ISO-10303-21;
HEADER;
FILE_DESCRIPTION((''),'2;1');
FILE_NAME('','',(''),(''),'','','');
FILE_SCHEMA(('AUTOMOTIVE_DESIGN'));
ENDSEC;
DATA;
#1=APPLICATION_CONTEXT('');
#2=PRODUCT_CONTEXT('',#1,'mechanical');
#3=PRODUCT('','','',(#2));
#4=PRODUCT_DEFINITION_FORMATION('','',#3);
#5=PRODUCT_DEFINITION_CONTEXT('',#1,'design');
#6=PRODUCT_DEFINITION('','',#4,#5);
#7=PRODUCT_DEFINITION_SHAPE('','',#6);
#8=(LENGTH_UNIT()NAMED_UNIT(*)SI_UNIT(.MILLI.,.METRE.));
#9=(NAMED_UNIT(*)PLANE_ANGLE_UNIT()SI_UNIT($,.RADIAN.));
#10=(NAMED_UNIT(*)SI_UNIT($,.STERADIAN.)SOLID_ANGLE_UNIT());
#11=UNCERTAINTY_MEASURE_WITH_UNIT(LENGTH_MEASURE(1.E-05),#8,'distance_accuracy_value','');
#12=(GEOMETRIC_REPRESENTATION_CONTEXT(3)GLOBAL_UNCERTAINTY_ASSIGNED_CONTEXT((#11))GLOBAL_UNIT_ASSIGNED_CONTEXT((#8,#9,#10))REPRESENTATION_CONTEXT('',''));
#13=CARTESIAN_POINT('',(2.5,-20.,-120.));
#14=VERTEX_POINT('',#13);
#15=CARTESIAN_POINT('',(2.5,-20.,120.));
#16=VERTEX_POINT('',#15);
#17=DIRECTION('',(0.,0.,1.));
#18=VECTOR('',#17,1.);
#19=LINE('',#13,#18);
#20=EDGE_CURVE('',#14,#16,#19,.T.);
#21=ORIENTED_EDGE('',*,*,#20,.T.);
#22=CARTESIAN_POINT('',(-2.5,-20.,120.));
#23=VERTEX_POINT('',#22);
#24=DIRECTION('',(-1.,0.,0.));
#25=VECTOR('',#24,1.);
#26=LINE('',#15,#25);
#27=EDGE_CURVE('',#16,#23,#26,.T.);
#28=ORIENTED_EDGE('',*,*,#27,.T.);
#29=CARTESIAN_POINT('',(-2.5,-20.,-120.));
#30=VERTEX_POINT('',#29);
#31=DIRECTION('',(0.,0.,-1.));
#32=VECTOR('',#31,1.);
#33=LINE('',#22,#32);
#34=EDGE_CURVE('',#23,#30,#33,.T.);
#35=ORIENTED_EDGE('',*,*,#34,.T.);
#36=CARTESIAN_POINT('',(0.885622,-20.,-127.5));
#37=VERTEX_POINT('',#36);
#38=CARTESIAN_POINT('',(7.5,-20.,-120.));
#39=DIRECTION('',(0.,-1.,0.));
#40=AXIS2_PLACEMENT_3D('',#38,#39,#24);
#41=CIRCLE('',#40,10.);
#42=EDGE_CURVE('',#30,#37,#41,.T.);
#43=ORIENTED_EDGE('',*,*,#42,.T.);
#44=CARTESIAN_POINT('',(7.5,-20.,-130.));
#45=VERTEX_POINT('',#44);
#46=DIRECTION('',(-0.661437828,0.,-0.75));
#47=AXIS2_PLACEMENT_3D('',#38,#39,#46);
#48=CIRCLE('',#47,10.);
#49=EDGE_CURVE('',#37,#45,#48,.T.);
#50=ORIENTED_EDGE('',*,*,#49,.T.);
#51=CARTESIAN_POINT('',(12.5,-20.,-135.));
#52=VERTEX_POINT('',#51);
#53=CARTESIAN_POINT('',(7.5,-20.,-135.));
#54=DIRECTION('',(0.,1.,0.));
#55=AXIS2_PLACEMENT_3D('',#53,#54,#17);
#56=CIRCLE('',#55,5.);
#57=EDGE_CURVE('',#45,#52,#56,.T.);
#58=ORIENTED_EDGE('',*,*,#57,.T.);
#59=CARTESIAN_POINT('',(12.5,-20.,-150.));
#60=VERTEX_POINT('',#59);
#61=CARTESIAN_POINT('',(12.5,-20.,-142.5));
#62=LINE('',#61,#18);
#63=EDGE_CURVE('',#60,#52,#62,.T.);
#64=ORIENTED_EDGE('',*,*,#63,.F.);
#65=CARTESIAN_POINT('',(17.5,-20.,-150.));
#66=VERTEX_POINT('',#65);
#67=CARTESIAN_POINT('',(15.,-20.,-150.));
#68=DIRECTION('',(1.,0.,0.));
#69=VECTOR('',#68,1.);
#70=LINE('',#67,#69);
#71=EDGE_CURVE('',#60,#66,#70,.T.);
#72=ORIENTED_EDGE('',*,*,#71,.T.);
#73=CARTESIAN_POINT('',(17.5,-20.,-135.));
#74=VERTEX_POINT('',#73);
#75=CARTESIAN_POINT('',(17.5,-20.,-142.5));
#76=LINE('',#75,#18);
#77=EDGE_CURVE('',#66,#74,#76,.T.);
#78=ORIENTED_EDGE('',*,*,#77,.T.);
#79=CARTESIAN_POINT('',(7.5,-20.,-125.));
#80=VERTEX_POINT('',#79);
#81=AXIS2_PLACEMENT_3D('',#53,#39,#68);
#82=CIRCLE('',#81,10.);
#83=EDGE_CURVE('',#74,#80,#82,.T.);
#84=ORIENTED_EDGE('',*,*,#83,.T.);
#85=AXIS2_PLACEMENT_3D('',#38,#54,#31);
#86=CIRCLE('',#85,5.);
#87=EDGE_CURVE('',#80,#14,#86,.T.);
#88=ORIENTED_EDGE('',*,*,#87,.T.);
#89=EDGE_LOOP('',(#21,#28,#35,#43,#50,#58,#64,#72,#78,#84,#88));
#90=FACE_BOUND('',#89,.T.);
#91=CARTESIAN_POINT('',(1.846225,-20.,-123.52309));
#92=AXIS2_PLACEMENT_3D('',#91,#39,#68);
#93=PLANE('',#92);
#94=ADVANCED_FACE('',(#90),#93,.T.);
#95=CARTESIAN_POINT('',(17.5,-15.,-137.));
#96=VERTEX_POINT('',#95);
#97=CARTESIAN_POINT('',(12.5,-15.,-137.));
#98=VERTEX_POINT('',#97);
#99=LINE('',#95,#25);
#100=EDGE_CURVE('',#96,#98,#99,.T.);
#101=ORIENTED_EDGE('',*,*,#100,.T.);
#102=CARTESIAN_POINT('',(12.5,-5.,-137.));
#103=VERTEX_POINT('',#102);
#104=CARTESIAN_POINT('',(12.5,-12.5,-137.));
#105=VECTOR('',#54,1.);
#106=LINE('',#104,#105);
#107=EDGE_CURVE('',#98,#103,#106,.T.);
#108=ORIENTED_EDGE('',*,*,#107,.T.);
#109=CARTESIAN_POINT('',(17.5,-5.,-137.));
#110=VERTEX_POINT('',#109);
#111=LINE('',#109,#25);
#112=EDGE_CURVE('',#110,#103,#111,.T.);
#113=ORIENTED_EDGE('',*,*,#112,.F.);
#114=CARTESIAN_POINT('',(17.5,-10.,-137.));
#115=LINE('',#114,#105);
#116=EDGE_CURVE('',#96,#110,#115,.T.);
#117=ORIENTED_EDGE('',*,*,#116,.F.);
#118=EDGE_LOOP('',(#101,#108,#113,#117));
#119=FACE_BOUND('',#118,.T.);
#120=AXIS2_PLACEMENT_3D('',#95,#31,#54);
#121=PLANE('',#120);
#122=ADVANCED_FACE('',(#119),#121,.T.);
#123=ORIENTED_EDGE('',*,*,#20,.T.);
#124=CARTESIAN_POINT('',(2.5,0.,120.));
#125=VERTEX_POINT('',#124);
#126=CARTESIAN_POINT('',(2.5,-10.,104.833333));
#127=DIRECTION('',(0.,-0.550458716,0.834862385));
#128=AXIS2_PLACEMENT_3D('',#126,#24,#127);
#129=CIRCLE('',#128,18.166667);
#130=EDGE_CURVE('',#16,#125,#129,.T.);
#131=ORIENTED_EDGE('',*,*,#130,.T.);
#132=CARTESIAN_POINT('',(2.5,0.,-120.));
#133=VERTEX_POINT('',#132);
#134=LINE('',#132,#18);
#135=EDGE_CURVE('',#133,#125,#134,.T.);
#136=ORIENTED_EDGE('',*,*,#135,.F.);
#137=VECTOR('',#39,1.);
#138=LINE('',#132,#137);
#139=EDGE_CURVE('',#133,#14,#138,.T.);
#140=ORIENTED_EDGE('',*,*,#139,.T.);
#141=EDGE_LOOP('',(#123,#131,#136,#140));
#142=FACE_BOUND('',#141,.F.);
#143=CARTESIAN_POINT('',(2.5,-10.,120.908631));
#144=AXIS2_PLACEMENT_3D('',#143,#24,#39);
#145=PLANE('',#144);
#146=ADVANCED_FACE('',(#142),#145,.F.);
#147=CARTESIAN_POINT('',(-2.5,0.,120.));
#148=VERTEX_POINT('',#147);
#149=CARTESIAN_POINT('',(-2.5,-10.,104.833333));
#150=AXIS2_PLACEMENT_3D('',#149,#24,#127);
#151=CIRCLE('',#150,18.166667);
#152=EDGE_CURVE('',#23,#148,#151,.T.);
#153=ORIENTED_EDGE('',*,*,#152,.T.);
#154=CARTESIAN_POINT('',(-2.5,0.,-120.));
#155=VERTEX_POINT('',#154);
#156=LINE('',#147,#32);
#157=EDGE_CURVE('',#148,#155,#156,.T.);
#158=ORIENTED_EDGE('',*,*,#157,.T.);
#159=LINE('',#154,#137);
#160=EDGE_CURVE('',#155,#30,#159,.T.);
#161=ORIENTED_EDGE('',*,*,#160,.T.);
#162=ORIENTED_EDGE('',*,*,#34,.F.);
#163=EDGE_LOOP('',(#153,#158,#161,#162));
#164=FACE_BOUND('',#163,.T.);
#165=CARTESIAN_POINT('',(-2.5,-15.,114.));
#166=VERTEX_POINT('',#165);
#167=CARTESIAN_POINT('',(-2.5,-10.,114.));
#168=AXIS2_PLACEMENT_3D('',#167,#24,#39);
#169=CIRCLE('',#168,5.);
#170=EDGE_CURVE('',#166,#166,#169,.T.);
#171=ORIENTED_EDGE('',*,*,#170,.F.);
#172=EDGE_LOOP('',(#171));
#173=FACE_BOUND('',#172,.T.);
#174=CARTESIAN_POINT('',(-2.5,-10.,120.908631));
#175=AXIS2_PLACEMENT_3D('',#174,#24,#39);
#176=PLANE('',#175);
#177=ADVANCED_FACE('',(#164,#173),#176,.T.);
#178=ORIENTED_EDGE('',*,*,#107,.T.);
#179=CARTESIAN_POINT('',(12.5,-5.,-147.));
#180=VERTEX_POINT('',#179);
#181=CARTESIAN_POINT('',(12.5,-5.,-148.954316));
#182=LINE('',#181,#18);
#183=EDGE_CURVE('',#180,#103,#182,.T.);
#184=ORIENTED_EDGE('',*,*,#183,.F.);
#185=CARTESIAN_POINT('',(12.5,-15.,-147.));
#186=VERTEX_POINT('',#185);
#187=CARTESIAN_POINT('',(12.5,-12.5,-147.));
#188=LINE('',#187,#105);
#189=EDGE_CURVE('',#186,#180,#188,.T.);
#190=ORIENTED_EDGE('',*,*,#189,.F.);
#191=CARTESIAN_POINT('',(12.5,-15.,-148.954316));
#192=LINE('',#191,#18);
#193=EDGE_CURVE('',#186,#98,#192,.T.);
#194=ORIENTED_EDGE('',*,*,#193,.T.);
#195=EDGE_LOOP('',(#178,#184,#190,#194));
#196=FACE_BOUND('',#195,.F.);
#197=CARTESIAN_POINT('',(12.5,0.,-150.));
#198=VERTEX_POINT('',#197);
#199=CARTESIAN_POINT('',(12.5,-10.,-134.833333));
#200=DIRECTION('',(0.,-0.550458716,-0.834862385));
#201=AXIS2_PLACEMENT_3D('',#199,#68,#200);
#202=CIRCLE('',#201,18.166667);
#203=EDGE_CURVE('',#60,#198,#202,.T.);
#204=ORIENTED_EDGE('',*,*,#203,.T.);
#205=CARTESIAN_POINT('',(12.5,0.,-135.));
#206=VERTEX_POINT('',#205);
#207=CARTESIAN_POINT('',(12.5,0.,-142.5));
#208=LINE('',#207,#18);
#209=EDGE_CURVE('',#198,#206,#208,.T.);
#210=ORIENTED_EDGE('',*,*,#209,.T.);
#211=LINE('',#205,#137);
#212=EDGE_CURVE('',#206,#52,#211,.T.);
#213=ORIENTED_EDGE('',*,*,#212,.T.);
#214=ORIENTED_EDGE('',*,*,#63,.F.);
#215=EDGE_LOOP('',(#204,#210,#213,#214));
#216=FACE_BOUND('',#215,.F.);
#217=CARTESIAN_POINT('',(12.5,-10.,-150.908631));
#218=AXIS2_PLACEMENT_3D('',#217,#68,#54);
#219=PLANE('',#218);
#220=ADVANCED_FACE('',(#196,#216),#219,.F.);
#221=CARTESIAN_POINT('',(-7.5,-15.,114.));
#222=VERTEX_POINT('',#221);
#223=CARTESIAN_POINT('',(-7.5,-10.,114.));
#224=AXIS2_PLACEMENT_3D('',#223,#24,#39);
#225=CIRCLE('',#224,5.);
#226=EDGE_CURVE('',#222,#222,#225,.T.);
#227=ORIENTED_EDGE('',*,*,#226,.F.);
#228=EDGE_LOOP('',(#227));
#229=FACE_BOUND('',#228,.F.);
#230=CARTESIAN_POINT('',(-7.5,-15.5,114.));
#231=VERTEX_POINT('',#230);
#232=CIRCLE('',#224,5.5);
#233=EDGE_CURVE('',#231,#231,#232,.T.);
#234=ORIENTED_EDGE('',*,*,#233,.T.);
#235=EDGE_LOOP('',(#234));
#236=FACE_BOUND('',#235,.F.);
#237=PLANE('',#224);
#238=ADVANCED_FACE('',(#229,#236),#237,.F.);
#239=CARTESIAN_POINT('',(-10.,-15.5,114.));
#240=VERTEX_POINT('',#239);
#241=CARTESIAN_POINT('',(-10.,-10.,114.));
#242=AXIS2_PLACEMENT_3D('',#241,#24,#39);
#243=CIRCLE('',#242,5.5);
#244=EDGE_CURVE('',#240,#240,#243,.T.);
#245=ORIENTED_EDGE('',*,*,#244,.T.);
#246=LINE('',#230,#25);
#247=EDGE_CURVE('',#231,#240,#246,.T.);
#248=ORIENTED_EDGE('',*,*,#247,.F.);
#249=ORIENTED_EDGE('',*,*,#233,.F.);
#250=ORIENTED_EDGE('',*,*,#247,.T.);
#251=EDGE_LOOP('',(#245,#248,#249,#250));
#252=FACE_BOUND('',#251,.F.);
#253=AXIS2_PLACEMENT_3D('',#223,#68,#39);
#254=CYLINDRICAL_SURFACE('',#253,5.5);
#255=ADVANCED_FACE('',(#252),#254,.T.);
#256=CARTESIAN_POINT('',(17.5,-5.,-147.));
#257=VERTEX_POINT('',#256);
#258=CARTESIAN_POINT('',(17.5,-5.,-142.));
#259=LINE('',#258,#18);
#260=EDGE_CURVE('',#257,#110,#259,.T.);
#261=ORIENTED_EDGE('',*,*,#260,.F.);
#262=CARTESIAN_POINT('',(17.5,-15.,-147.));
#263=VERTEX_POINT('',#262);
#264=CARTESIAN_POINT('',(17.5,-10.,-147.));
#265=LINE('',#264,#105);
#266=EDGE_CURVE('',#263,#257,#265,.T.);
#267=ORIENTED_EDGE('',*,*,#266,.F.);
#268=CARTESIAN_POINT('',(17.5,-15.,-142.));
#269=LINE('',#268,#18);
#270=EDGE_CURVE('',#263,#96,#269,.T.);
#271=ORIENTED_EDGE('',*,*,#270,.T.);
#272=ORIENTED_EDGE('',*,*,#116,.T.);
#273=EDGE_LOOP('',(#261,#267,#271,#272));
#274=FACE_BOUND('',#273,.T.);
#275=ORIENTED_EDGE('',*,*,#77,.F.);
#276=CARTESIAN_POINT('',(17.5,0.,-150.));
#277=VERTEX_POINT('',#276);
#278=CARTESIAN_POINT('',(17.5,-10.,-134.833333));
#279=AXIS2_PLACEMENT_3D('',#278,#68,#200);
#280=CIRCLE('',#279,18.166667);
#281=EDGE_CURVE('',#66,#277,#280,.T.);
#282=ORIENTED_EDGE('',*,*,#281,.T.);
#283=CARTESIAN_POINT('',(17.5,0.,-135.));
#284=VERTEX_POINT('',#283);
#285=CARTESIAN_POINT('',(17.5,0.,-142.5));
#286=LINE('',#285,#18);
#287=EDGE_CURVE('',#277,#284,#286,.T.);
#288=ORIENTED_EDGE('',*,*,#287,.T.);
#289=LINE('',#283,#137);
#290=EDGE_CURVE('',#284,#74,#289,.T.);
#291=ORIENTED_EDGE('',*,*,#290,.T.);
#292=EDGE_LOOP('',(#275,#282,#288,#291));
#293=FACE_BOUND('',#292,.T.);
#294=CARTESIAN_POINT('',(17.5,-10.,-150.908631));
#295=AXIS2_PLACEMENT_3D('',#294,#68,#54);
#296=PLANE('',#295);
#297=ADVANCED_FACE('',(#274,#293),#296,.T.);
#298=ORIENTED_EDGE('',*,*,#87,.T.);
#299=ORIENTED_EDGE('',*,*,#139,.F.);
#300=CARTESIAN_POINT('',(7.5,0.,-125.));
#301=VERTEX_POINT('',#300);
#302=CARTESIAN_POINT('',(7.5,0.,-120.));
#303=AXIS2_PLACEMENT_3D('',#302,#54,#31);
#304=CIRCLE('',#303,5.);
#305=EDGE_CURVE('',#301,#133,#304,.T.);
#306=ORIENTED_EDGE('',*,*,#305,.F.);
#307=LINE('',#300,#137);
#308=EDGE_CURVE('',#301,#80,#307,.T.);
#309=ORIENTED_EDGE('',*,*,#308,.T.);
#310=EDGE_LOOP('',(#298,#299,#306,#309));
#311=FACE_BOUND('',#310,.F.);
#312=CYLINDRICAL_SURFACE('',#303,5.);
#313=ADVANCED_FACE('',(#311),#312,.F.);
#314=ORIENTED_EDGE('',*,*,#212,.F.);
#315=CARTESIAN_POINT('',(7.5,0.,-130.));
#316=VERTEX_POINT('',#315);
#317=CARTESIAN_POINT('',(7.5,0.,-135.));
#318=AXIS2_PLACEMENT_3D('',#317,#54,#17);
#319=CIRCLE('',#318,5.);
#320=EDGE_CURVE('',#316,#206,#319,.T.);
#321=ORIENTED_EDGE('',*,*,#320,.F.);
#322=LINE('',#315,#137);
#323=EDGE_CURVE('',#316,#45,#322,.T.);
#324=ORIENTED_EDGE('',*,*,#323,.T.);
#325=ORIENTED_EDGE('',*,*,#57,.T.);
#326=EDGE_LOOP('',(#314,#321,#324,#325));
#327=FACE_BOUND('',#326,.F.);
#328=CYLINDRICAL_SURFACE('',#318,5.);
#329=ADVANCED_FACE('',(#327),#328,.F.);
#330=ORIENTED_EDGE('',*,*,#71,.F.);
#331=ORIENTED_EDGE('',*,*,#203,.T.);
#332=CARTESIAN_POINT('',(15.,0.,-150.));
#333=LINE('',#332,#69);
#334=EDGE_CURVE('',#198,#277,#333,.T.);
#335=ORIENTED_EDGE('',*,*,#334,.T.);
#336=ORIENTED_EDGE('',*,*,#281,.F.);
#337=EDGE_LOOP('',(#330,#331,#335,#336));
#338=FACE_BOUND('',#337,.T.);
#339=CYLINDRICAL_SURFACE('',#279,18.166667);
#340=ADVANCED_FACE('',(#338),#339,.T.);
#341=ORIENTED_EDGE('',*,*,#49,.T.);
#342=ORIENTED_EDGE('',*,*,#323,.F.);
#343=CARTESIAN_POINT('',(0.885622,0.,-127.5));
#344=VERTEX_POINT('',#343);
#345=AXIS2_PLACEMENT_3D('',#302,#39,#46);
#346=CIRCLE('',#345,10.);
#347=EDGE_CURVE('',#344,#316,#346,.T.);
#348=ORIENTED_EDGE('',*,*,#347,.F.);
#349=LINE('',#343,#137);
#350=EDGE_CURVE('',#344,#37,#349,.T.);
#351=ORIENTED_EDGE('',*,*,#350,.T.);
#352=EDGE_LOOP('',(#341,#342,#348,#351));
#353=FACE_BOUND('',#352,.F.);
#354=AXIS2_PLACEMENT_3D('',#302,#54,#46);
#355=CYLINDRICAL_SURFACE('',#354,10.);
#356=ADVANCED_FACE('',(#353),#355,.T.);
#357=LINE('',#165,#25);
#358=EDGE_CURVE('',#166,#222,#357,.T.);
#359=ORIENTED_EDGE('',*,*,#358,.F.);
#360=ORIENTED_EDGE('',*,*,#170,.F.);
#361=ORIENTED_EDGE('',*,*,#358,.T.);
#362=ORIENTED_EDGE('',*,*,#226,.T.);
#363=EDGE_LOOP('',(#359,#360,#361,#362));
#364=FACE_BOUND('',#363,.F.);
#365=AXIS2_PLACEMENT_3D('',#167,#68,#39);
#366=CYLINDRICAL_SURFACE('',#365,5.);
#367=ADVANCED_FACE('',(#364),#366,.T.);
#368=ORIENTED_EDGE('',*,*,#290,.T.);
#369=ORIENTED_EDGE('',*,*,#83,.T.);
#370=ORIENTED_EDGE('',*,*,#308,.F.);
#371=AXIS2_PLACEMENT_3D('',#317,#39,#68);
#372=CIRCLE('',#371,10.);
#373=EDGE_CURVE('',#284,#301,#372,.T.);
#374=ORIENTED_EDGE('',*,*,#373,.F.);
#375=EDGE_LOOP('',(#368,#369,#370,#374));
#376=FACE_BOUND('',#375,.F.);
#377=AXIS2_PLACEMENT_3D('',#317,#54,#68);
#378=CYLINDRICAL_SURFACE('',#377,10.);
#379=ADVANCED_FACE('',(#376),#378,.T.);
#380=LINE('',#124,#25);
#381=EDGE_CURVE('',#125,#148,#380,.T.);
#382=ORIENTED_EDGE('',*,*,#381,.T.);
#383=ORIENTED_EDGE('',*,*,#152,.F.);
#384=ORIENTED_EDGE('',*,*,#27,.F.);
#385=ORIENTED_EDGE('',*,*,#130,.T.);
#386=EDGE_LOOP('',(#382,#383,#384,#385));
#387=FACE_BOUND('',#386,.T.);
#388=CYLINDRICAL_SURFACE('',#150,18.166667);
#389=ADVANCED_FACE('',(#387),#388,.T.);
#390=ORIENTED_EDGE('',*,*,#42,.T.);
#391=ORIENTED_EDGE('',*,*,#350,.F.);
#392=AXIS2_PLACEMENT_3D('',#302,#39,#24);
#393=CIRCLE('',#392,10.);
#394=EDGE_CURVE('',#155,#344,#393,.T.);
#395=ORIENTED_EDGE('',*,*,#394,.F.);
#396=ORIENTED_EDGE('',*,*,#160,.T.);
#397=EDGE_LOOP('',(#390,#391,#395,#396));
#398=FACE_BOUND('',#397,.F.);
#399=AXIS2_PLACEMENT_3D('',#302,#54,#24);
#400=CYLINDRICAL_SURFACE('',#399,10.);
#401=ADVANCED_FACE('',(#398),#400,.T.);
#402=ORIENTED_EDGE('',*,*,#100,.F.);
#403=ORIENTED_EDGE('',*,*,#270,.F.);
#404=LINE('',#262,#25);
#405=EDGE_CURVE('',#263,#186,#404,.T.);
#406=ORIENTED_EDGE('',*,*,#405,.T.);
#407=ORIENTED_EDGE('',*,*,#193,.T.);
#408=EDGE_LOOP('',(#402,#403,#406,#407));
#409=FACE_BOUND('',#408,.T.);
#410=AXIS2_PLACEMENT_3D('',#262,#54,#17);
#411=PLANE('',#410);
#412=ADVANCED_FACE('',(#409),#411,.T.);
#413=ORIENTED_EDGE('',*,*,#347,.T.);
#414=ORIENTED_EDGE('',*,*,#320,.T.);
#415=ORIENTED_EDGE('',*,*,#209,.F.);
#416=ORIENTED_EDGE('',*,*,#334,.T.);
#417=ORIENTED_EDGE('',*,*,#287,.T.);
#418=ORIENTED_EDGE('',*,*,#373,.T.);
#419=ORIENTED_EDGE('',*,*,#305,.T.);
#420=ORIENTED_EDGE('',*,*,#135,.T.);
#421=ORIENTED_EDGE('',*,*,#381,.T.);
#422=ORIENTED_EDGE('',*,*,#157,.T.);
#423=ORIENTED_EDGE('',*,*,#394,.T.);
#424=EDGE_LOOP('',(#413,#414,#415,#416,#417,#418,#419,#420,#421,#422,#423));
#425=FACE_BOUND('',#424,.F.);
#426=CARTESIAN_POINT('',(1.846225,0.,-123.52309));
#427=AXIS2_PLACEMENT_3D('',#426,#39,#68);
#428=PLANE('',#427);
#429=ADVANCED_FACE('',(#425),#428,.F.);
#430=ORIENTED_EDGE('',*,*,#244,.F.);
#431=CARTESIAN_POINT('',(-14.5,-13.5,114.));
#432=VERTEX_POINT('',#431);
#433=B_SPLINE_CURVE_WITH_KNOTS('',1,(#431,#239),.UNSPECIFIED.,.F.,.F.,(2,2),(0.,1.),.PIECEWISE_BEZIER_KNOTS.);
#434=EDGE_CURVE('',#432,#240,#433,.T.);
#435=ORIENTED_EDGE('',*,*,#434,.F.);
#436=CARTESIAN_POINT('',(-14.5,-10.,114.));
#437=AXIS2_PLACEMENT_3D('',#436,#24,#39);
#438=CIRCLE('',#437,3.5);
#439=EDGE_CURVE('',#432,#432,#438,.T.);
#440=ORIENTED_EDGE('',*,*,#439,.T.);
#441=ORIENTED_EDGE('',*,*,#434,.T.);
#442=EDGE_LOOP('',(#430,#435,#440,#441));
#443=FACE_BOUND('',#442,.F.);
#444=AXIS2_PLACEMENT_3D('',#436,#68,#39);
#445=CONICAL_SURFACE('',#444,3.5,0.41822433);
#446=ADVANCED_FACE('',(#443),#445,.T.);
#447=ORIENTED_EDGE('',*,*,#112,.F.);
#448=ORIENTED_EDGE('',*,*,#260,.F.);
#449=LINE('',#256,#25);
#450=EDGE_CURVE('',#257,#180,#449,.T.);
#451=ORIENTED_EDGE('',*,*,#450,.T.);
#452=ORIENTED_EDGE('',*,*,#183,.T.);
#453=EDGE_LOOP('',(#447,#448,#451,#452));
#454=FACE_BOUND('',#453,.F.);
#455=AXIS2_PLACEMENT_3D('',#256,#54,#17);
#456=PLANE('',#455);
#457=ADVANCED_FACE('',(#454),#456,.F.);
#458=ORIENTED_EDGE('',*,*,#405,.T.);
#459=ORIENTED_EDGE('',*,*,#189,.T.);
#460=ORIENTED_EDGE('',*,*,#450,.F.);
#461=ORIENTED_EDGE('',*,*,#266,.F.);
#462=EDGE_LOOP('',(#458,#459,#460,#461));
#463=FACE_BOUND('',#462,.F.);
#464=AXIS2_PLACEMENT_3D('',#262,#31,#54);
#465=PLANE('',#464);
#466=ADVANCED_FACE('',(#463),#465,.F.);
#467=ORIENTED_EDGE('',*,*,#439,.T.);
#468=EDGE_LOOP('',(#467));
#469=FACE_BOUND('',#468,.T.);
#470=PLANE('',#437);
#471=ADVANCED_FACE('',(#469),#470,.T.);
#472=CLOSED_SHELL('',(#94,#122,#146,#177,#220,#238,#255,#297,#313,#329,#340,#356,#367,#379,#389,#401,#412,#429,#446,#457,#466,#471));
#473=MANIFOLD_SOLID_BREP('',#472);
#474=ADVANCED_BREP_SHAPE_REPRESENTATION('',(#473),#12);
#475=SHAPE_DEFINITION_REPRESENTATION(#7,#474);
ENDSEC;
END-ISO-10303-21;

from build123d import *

# Parameters (mm, degrees)
F0_W      = 5
F0_H      = 15
F1_DEPTH  = 20
F3_DEPTH  = 5
F2_W      = 10
F2_H      = 10
F4_DEPTH  = 20.001
F6_DEPTH  = 5
F5_R      = 5
F7_DEPTH  = 5
F8_R      = 5.5
F8_R_2    = 5
F9_DEPTH  = 2.5
F11_R     = 3.5
F9_FACE_R = 5.5


with BuildPart() as f1:
    # F0 (on Front) → F1 (new body)
    with BuildSketch(Plane.XZ):
        with BuildLine():
            ThreePointArc((7.5, -125), (3.9644660941, -123.5355339059), (2.5, -120))
            Line((2.5, -120), (-2.5, -120))
            ThreePointArc((-2.5, -120), (-1.6143782777, -124.1143782777), (0.8856217223, -127.5))
            ThreePointArc((0.8856217223, -127.5), (3.9644660941, -125.6458565331), (7.5, -125))
        make_face()
        with BuildLine():
            Line((-2.5, -120), (2.5, -120))
            Line((2.5, -120), (2.5, -111.3397459622))
            ThreePointArc((2.5, -111.3397459622), (-1.1602540378, -115), (-2.5, -120))
        make_face()
        with BuildLine():
            Line((-2.5, 120), (-2.5, -120))
            ThreePointArc((-2.5, -120), (-1.1602540378, -115), (2.5, -111.3397459622))
            Line((2.5, -111.3397459622), (2.5, 120))
            Line((2.5, 120), (-2.5, 120))
        make_face()
        with BuildLine():
            ThreePointArc((17.5, -135), (14.5710678119, -127.9289321881), (7.5, -125))
            Line((7.5, -125), (7.5, -130))
            ThreePointArc((7.5, -130), (11.0355339059, -131.4644660941), (12.5, -135))
            Line((12.5, -135), (17.5, -135))
        make_face()
        with BuildLine():
            Line((7.5, -130), (7.5, -125))
            ThreePointArc((7.5, -125), (3.9644660941, -125.6458565331), (0.8856217223, -127.5))
            ThreePointArc((0.8856217223, -127.5), (3.9644660941, -129.3541434669), (7.5, -130))
        make_face()
        with Locations((15, -142.5)):
            Rectangle(F0_W, F0_H)
    extrude(amount=F1_DEPTH)

    # F2 (on face) → F3 (join)
    with BuildSketch(Plane.YZ.offset(17.5)):
        with BuildLine():
            Line((0, -150), (-20, -150))
            ThreePointArc((-20, -150), (-10, -153), (0, -150))
        make_face()
    extrude(amount=-F3_DEPTH)

    # F2 (on face) → F4 (cut, through all)
    with BuildSketch(Plane.YZ.offset(17.5)):
        with Locations((-10, -142)):
            Rectangle(F2_W, F2_H)
    extrude(amount=-F4_DEPTH, mode=Mode.SUBTRACT)

    # F5 (on face) → F6 (join)
    with BuildSketch(Plane(origin=(-2.5, 0, 0), x_dir=(0, -1, 0), z_dir=(-1, 0, 0))):
        with BuildLine():
            Line((0, 120), (20, 120))
            ThreePointArc((20, 120), (10, 123), (0, 120))
        make_face()
    extrude(amount=-F6_DEPTH)

    # F5 (on face) → F7 (join)
    with BuildSketch(Plane(origin=(-2.5, 0, 0), x_dir=(0, -1, 0), z_dir=(-1, 0, 0))):
        with Locations((10, 114)):
            Circle(F5_R)
    extrude(amount=F7_DEPTH)

    # F8 (on face) → F9 (join)
    with BuildSketch(Plane(origin=(-7.5, 0, 0), x_dir=(0, -1, 0), z_dir=(-1, 0, 0))):
        with Locations((10, 114)):
            Circle(F8_R)
        with Locations((10, 114)):
            Circle(F8_R_2, mode=Mode.SUBTRACT)
        with Locations((10, 114)):
            Circle(F8_R_2)
    extrude(amount=F9_DEPTH)

    # F11 (on offset) → F12 section 0
    with BuildSketch(Plane(origin=(-14.5, 0, 0), x_dir=(0, -1, 0), z_dir=(-1, 0, 0))):
        with Locations((10, 114)):
            Circle(F11_R)
    # F9_face (on face) → F12 section 1
    with BuildSketch(Plane(origin=(-10, -10, 114), x_dir=(0, -1, 0), z_dir=(-1, 0, 0))):
        Circle(F9_FACE_R)
    loft()


solid = f1.part
